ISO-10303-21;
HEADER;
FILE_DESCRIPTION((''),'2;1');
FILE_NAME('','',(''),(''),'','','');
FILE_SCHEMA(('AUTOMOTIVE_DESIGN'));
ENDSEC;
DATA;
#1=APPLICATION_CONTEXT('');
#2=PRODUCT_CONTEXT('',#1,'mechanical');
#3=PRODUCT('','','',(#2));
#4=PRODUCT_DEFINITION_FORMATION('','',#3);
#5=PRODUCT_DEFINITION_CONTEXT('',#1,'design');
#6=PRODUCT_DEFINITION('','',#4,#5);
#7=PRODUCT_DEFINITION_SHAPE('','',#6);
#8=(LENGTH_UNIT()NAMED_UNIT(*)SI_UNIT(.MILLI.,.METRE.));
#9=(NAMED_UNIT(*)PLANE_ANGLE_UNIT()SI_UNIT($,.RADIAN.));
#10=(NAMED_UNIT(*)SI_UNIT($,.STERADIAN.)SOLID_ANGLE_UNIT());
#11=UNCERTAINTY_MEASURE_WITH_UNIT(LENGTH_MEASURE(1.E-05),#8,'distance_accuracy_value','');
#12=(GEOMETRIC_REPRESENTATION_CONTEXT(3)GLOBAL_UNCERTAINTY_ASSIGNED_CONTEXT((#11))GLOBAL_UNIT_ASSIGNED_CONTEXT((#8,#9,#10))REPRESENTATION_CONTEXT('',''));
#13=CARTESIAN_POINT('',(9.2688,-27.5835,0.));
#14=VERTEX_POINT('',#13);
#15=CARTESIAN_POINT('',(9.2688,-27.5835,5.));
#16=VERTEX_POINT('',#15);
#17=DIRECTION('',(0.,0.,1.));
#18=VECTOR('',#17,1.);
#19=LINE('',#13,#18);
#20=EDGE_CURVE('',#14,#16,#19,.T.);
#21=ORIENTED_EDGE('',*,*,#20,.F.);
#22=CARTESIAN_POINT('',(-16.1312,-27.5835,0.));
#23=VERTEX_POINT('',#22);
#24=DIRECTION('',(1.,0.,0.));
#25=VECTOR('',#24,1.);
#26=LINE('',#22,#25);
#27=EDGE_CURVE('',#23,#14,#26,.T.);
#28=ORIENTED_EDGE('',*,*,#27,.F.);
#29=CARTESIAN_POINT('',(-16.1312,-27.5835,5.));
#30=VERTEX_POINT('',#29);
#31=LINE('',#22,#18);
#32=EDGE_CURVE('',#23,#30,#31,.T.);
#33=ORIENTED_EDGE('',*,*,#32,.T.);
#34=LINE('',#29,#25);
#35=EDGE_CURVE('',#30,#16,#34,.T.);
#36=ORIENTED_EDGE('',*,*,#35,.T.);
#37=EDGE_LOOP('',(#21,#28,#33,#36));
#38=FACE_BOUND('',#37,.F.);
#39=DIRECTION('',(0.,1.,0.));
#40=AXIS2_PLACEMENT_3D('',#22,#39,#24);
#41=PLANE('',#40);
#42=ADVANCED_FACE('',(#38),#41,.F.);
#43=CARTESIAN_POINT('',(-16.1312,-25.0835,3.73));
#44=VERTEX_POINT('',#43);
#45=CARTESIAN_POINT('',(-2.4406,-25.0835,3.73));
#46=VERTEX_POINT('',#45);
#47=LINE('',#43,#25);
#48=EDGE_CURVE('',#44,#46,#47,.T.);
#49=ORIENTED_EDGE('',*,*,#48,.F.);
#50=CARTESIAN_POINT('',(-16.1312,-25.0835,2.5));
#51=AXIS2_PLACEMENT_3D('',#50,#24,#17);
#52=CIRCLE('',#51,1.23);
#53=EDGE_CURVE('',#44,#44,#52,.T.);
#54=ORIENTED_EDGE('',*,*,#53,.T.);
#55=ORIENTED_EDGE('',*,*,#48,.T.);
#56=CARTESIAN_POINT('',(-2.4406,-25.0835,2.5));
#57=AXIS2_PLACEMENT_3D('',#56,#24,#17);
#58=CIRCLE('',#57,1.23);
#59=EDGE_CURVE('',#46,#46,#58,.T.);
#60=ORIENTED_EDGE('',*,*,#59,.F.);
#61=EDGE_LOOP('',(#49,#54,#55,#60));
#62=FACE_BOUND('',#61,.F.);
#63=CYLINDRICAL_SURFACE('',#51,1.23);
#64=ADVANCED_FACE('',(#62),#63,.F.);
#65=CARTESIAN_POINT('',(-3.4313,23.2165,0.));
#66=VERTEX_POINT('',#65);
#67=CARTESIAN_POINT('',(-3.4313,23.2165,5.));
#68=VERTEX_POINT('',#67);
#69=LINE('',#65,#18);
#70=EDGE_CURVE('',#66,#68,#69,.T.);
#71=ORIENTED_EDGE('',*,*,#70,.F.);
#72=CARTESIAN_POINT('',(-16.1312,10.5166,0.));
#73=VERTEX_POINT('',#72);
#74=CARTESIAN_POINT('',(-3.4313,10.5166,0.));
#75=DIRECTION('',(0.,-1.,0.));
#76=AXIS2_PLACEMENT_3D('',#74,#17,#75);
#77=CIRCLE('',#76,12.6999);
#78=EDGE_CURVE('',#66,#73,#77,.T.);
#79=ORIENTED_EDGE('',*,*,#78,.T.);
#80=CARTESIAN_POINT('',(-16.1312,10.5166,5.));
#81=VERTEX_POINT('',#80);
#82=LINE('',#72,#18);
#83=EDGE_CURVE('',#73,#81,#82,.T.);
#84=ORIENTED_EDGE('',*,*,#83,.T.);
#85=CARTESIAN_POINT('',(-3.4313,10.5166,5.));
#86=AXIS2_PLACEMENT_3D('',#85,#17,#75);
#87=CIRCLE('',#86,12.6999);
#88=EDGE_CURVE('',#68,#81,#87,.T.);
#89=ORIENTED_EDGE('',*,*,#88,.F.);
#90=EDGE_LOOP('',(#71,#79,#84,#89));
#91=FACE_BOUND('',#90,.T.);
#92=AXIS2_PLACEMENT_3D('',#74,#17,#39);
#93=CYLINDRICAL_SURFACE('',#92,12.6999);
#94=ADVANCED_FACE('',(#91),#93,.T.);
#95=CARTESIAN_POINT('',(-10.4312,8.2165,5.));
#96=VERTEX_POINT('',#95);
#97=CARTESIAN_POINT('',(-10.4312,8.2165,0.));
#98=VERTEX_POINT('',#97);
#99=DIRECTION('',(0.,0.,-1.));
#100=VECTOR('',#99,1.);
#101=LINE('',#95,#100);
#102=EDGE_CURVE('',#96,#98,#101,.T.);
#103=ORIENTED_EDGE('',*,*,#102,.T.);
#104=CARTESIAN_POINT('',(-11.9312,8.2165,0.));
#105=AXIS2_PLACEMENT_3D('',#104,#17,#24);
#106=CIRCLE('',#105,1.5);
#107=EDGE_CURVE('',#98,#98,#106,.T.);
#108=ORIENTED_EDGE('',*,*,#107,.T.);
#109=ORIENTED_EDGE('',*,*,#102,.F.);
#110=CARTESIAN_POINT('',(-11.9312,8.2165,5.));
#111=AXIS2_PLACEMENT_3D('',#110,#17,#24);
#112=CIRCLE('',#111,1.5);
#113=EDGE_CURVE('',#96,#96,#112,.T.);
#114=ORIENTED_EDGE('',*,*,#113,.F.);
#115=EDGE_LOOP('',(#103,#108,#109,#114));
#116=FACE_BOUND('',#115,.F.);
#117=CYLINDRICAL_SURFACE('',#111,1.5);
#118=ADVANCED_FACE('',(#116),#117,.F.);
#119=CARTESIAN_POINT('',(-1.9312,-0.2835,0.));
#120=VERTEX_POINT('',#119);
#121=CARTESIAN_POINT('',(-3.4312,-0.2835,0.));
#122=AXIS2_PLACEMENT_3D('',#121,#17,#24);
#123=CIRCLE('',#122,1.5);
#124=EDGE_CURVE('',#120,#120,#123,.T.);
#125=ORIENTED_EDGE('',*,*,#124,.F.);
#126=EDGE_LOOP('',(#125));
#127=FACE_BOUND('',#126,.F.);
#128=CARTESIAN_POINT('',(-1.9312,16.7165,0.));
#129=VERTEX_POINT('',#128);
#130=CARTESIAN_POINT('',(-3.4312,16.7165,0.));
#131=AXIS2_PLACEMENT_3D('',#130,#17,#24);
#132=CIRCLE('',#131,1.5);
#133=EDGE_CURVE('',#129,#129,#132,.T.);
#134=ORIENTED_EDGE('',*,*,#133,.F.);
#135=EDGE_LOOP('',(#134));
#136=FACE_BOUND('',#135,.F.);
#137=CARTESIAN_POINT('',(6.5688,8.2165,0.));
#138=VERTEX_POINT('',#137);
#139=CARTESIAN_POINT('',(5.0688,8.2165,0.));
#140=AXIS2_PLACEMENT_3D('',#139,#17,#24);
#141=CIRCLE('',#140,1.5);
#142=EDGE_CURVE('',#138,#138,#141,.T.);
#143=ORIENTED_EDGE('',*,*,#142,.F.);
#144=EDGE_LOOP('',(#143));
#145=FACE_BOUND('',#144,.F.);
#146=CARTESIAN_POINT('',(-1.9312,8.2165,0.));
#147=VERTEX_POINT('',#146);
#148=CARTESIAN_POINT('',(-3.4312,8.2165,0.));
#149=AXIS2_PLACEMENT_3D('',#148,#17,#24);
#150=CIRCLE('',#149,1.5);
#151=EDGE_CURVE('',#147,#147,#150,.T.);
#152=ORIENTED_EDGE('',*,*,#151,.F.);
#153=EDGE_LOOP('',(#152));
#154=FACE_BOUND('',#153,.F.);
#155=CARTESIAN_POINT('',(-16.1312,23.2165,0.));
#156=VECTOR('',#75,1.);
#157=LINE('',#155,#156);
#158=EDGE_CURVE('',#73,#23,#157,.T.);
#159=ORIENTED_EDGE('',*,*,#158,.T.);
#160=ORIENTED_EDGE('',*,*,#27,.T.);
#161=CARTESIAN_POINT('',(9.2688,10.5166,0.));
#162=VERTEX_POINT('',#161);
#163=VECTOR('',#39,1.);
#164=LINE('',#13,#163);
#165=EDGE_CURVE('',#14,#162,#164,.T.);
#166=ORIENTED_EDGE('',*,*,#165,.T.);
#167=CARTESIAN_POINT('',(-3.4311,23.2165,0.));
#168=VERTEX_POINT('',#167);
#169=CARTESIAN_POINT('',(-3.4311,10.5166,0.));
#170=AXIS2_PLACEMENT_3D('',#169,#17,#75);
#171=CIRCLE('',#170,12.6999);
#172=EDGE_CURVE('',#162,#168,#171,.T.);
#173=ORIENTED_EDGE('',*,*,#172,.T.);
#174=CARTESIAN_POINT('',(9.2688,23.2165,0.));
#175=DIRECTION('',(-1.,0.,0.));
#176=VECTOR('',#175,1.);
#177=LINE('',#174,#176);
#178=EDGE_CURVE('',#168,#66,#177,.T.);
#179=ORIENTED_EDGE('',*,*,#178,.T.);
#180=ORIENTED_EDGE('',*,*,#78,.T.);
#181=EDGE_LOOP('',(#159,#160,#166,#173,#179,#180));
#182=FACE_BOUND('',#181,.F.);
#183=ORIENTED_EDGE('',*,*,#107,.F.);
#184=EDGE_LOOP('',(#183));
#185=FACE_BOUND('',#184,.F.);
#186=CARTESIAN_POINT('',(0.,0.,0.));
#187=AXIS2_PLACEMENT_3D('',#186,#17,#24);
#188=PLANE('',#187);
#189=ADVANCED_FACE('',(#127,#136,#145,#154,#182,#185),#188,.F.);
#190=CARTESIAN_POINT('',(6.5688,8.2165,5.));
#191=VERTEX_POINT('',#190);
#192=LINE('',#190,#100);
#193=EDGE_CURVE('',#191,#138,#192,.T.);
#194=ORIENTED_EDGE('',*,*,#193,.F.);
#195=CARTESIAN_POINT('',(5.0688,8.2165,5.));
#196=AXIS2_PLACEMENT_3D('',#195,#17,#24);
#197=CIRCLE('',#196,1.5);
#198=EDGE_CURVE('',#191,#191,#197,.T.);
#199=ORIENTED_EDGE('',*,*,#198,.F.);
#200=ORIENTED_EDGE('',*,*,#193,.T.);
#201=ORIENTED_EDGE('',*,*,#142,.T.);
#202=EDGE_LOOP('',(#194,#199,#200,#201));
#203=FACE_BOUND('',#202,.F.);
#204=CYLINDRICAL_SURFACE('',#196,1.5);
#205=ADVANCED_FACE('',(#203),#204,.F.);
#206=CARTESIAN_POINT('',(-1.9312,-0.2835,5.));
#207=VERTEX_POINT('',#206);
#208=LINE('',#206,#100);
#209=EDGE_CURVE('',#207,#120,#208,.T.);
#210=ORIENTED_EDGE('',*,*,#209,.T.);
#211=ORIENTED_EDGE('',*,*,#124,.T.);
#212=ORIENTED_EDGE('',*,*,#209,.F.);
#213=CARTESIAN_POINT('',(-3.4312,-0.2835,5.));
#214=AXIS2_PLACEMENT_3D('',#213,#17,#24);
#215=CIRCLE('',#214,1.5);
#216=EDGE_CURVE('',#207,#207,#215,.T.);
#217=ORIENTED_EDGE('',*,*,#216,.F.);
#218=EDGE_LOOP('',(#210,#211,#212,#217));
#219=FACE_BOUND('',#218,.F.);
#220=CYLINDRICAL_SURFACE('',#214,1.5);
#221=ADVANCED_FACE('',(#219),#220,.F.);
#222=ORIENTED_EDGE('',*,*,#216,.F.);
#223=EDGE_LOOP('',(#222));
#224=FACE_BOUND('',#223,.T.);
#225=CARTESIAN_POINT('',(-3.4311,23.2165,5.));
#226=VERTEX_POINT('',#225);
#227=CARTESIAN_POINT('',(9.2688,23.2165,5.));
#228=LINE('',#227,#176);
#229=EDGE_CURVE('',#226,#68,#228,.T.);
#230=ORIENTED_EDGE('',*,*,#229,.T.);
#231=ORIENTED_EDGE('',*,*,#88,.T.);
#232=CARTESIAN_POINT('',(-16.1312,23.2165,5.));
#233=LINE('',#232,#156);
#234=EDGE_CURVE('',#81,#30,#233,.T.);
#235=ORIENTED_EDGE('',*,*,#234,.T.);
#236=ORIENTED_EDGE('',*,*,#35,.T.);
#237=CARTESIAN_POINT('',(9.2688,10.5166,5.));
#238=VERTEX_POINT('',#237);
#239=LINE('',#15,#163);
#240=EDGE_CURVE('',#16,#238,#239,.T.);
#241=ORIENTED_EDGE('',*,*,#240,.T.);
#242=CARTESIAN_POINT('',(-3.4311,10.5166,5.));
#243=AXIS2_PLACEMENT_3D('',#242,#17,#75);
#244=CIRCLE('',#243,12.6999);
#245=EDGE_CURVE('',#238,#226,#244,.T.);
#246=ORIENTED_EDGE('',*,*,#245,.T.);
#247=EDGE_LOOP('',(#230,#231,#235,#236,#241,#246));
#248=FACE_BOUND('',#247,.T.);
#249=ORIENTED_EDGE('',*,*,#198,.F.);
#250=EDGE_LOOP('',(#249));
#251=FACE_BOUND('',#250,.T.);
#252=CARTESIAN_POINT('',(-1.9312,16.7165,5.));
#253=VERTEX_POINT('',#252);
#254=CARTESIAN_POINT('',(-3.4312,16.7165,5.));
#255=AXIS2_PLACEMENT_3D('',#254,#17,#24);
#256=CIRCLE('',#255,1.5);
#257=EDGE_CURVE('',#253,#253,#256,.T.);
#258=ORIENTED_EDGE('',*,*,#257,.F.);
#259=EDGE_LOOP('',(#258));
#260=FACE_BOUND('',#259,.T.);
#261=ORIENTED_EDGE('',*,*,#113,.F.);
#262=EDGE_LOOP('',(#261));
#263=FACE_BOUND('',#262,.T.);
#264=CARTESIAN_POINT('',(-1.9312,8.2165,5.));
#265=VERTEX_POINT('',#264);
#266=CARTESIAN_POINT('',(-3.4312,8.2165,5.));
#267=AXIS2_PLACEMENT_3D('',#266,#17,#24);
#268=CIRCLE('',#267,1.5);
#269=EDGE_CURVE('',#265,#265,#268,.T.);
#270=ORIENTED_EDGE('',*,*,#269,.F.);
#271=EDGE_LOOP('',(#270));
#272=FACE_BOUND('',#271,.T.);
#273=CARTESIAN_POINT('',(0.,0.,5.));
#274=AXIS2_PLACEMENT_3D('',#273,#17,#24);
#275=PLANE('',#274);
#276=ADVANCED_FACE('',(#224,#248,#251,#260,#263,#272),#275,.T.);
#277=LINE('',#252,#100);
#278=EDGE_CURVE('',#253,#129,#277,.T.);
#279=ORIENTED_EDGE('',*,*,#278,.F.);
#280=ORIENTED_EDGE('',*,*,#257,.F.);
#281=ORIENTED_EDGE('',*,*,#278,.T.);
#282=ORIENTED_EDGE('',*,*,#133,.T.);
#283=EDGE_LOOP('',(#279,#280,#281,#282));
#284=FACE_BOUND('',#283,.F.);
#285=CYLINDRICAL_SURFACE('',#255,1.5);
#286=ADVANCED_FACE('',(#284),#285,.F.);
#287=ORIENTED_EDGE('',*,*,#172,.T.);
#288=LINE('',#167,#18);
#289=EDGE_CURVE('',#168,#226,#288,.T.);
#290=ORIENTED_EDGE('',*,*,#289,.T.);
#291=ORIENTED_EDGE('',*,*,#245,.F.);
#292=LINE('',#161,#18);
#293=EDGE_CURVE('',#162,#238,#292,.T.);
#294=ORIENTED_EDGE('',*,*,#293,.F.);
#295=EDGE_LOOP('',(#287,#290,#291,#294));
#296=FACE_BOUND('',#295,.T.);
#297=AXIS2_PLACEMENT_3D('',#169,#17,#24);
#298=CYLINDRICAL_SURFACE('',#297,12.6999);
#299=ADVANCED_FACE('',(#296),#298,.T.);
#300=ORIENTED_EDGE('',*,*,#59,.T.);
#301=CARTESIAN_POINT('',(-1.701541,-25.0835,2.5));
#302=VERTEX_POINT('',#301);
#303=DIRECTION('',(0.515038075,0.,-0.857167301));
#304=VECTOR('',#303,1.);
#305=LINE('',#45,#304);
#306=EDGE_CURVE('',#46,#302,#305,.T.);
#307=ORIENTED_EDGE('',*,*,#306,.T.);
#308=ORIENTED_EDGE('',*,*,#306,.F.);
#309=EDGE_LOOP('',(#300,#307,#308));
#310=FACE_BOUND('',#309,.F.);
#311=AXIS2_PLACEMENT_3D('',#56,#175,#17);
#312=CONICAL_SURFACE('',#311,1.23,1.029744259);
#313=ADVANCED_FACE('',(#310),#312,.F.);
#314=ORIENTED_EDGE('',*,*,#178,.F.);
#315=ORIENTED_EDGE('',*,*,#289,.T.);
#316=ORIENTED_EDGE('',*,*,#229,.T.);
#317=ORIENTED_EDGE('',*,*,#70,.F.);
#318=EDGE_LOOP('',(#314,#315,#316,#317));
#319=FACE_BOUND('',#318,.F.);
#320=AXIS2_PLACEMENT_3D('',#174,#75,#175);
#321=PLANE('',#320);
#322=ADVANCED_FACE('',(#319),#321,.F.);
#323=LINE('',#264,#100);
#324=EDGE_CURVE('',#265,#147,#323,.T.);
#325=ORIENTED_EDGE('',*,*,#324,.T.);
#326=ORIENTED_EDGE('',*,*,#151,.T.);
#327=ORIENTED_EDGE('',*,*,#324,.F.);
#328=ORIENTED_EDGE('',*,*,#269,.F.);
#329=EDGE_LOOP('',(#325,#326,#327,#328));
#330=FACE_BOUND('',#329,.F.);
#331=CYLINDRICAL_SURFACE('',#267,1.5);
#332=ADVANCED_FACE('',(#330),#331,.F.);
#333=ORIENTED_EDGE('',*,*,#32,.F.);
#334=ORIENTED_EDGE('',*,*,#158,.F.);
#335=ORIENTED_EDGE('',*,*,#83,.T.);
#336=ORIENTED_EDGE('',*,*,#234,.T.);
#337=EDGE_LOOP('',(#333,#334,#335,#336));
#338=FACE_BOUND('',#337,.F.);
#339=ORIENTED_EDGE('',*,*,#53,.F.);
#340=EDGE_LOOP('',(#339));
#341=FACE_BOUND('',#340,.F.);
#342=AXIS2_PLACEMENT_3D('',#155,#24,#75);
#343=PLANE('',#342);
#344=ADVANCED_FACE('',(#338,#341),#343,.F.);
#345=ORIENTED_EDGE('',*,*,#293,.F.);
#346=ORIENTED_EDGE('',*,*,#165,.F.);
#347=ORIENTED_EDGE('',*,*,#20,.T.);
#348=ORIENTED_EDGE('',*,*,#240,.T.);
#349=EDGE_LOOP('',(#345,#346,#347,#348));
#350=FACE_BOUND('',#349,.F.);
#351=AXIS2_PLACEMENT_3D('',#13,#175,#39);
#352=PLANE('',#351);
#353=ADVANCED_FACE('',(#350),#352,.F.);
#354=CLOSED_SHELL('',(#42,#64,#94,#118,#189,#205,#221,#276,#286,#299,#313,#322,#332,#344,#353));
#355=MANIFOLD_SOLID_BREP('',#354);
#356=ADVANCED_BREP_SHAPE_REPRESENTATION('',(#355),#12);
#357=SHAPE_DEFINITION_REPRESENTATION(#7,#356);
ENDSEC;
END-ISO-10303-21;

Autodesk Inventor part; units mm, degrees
ref_plane "YZ Plane" through (0, 0, 0) normal (1, 0, 0) x (0, 1, 0)
ref_plane "XZ Plane" through (0, 0, 0) normal (0, 1, 0) x (-1, 0, 0)
ref_plane "XY Plane" through (0, 0, 0) normal (0, 0, 1) x (1, 0, 0)
sketch "Sketch1" plane through (0, 0, 0) normal (0, 0, 1) x (1, 0, 0)
  line L0 (9.2688, 23.2165) -> (-16.1312, 23.2165)
  line L1 (-16.1312, 23.2165) -> (-16.1312, -27.5835)
  line L2 (-16.1312, -27.5835) -> (9.2688, -27.5835)
  line L3 (9.2688, -27.5835) -> (9.2688, 23.2165)
  point P0 (0, 0)
  dimension "d0" = 25.4
  dimension "d1" = 50.8
extrude "Extrusion1" add sketch "Sketch1" along normal blind 5
sketch "Sketch2" plane through (0, 0, 5) normal (0, 0, 1) x (1, 0, 0)
  circle A0 centre (-3.4312, 8.2165) radius 12.3 construction
  circle A1 centre (-3.4312, 8.2165) radius 8.5 construction
  circle A2 centre (-11.9312, 8.2165) radius 1.5
  circle A3 centre (-3.4312, 8.2165) radius 1.5
  circle A4 centre (-3.4312, -0.2835) radius 1.5
  circle A5 centre (5.0688, 8.2165) radius 1.5
  circle A6 centre (-3.4312, 16.7165) radius 1.5
  line L0 (9.2688, 23.2165) -> (-16.1312, 23.2165) projected
  point P0 (0, 0)
  point P1 (-3.4312, 23.2165)
  dimension "d5" = 17
  dimension "d4" = 24.6
  dimension "d6" = 3
  dimension "d7" = 3
  dimension "d10" = 360
  dimension "d12" = 15
extrude "Extrusion2" cut sketch "Sketch2" against normal up to next
sketch "Sketch3" plane through (-16.1312, -27.5835, 0) normal (-1, 0, 0) x (0, 0, 1)
  line L0 (0, 0) -> (5, 0) projected
  point P0 (0, 27.5835)
  point P1 (2.5, 2.5)
  point P2 (2.5, 0)
  dimension "d15" = 2.5
hole "Hole1" at (-16.1312, -25.0835, 2.5) direction (1, 0, 0) diameter 2.46 depth 13.6906 tip angle 118
full round fillet "Fillet1" first side at (-16.1312, 7.5235, 2.4506) centre faces at (0.8021, 23.2165, 3.3333) second side at (9.2688, -10.6502, 1.6667)
properties part number "Tilt_Camera_Side_Plate"
